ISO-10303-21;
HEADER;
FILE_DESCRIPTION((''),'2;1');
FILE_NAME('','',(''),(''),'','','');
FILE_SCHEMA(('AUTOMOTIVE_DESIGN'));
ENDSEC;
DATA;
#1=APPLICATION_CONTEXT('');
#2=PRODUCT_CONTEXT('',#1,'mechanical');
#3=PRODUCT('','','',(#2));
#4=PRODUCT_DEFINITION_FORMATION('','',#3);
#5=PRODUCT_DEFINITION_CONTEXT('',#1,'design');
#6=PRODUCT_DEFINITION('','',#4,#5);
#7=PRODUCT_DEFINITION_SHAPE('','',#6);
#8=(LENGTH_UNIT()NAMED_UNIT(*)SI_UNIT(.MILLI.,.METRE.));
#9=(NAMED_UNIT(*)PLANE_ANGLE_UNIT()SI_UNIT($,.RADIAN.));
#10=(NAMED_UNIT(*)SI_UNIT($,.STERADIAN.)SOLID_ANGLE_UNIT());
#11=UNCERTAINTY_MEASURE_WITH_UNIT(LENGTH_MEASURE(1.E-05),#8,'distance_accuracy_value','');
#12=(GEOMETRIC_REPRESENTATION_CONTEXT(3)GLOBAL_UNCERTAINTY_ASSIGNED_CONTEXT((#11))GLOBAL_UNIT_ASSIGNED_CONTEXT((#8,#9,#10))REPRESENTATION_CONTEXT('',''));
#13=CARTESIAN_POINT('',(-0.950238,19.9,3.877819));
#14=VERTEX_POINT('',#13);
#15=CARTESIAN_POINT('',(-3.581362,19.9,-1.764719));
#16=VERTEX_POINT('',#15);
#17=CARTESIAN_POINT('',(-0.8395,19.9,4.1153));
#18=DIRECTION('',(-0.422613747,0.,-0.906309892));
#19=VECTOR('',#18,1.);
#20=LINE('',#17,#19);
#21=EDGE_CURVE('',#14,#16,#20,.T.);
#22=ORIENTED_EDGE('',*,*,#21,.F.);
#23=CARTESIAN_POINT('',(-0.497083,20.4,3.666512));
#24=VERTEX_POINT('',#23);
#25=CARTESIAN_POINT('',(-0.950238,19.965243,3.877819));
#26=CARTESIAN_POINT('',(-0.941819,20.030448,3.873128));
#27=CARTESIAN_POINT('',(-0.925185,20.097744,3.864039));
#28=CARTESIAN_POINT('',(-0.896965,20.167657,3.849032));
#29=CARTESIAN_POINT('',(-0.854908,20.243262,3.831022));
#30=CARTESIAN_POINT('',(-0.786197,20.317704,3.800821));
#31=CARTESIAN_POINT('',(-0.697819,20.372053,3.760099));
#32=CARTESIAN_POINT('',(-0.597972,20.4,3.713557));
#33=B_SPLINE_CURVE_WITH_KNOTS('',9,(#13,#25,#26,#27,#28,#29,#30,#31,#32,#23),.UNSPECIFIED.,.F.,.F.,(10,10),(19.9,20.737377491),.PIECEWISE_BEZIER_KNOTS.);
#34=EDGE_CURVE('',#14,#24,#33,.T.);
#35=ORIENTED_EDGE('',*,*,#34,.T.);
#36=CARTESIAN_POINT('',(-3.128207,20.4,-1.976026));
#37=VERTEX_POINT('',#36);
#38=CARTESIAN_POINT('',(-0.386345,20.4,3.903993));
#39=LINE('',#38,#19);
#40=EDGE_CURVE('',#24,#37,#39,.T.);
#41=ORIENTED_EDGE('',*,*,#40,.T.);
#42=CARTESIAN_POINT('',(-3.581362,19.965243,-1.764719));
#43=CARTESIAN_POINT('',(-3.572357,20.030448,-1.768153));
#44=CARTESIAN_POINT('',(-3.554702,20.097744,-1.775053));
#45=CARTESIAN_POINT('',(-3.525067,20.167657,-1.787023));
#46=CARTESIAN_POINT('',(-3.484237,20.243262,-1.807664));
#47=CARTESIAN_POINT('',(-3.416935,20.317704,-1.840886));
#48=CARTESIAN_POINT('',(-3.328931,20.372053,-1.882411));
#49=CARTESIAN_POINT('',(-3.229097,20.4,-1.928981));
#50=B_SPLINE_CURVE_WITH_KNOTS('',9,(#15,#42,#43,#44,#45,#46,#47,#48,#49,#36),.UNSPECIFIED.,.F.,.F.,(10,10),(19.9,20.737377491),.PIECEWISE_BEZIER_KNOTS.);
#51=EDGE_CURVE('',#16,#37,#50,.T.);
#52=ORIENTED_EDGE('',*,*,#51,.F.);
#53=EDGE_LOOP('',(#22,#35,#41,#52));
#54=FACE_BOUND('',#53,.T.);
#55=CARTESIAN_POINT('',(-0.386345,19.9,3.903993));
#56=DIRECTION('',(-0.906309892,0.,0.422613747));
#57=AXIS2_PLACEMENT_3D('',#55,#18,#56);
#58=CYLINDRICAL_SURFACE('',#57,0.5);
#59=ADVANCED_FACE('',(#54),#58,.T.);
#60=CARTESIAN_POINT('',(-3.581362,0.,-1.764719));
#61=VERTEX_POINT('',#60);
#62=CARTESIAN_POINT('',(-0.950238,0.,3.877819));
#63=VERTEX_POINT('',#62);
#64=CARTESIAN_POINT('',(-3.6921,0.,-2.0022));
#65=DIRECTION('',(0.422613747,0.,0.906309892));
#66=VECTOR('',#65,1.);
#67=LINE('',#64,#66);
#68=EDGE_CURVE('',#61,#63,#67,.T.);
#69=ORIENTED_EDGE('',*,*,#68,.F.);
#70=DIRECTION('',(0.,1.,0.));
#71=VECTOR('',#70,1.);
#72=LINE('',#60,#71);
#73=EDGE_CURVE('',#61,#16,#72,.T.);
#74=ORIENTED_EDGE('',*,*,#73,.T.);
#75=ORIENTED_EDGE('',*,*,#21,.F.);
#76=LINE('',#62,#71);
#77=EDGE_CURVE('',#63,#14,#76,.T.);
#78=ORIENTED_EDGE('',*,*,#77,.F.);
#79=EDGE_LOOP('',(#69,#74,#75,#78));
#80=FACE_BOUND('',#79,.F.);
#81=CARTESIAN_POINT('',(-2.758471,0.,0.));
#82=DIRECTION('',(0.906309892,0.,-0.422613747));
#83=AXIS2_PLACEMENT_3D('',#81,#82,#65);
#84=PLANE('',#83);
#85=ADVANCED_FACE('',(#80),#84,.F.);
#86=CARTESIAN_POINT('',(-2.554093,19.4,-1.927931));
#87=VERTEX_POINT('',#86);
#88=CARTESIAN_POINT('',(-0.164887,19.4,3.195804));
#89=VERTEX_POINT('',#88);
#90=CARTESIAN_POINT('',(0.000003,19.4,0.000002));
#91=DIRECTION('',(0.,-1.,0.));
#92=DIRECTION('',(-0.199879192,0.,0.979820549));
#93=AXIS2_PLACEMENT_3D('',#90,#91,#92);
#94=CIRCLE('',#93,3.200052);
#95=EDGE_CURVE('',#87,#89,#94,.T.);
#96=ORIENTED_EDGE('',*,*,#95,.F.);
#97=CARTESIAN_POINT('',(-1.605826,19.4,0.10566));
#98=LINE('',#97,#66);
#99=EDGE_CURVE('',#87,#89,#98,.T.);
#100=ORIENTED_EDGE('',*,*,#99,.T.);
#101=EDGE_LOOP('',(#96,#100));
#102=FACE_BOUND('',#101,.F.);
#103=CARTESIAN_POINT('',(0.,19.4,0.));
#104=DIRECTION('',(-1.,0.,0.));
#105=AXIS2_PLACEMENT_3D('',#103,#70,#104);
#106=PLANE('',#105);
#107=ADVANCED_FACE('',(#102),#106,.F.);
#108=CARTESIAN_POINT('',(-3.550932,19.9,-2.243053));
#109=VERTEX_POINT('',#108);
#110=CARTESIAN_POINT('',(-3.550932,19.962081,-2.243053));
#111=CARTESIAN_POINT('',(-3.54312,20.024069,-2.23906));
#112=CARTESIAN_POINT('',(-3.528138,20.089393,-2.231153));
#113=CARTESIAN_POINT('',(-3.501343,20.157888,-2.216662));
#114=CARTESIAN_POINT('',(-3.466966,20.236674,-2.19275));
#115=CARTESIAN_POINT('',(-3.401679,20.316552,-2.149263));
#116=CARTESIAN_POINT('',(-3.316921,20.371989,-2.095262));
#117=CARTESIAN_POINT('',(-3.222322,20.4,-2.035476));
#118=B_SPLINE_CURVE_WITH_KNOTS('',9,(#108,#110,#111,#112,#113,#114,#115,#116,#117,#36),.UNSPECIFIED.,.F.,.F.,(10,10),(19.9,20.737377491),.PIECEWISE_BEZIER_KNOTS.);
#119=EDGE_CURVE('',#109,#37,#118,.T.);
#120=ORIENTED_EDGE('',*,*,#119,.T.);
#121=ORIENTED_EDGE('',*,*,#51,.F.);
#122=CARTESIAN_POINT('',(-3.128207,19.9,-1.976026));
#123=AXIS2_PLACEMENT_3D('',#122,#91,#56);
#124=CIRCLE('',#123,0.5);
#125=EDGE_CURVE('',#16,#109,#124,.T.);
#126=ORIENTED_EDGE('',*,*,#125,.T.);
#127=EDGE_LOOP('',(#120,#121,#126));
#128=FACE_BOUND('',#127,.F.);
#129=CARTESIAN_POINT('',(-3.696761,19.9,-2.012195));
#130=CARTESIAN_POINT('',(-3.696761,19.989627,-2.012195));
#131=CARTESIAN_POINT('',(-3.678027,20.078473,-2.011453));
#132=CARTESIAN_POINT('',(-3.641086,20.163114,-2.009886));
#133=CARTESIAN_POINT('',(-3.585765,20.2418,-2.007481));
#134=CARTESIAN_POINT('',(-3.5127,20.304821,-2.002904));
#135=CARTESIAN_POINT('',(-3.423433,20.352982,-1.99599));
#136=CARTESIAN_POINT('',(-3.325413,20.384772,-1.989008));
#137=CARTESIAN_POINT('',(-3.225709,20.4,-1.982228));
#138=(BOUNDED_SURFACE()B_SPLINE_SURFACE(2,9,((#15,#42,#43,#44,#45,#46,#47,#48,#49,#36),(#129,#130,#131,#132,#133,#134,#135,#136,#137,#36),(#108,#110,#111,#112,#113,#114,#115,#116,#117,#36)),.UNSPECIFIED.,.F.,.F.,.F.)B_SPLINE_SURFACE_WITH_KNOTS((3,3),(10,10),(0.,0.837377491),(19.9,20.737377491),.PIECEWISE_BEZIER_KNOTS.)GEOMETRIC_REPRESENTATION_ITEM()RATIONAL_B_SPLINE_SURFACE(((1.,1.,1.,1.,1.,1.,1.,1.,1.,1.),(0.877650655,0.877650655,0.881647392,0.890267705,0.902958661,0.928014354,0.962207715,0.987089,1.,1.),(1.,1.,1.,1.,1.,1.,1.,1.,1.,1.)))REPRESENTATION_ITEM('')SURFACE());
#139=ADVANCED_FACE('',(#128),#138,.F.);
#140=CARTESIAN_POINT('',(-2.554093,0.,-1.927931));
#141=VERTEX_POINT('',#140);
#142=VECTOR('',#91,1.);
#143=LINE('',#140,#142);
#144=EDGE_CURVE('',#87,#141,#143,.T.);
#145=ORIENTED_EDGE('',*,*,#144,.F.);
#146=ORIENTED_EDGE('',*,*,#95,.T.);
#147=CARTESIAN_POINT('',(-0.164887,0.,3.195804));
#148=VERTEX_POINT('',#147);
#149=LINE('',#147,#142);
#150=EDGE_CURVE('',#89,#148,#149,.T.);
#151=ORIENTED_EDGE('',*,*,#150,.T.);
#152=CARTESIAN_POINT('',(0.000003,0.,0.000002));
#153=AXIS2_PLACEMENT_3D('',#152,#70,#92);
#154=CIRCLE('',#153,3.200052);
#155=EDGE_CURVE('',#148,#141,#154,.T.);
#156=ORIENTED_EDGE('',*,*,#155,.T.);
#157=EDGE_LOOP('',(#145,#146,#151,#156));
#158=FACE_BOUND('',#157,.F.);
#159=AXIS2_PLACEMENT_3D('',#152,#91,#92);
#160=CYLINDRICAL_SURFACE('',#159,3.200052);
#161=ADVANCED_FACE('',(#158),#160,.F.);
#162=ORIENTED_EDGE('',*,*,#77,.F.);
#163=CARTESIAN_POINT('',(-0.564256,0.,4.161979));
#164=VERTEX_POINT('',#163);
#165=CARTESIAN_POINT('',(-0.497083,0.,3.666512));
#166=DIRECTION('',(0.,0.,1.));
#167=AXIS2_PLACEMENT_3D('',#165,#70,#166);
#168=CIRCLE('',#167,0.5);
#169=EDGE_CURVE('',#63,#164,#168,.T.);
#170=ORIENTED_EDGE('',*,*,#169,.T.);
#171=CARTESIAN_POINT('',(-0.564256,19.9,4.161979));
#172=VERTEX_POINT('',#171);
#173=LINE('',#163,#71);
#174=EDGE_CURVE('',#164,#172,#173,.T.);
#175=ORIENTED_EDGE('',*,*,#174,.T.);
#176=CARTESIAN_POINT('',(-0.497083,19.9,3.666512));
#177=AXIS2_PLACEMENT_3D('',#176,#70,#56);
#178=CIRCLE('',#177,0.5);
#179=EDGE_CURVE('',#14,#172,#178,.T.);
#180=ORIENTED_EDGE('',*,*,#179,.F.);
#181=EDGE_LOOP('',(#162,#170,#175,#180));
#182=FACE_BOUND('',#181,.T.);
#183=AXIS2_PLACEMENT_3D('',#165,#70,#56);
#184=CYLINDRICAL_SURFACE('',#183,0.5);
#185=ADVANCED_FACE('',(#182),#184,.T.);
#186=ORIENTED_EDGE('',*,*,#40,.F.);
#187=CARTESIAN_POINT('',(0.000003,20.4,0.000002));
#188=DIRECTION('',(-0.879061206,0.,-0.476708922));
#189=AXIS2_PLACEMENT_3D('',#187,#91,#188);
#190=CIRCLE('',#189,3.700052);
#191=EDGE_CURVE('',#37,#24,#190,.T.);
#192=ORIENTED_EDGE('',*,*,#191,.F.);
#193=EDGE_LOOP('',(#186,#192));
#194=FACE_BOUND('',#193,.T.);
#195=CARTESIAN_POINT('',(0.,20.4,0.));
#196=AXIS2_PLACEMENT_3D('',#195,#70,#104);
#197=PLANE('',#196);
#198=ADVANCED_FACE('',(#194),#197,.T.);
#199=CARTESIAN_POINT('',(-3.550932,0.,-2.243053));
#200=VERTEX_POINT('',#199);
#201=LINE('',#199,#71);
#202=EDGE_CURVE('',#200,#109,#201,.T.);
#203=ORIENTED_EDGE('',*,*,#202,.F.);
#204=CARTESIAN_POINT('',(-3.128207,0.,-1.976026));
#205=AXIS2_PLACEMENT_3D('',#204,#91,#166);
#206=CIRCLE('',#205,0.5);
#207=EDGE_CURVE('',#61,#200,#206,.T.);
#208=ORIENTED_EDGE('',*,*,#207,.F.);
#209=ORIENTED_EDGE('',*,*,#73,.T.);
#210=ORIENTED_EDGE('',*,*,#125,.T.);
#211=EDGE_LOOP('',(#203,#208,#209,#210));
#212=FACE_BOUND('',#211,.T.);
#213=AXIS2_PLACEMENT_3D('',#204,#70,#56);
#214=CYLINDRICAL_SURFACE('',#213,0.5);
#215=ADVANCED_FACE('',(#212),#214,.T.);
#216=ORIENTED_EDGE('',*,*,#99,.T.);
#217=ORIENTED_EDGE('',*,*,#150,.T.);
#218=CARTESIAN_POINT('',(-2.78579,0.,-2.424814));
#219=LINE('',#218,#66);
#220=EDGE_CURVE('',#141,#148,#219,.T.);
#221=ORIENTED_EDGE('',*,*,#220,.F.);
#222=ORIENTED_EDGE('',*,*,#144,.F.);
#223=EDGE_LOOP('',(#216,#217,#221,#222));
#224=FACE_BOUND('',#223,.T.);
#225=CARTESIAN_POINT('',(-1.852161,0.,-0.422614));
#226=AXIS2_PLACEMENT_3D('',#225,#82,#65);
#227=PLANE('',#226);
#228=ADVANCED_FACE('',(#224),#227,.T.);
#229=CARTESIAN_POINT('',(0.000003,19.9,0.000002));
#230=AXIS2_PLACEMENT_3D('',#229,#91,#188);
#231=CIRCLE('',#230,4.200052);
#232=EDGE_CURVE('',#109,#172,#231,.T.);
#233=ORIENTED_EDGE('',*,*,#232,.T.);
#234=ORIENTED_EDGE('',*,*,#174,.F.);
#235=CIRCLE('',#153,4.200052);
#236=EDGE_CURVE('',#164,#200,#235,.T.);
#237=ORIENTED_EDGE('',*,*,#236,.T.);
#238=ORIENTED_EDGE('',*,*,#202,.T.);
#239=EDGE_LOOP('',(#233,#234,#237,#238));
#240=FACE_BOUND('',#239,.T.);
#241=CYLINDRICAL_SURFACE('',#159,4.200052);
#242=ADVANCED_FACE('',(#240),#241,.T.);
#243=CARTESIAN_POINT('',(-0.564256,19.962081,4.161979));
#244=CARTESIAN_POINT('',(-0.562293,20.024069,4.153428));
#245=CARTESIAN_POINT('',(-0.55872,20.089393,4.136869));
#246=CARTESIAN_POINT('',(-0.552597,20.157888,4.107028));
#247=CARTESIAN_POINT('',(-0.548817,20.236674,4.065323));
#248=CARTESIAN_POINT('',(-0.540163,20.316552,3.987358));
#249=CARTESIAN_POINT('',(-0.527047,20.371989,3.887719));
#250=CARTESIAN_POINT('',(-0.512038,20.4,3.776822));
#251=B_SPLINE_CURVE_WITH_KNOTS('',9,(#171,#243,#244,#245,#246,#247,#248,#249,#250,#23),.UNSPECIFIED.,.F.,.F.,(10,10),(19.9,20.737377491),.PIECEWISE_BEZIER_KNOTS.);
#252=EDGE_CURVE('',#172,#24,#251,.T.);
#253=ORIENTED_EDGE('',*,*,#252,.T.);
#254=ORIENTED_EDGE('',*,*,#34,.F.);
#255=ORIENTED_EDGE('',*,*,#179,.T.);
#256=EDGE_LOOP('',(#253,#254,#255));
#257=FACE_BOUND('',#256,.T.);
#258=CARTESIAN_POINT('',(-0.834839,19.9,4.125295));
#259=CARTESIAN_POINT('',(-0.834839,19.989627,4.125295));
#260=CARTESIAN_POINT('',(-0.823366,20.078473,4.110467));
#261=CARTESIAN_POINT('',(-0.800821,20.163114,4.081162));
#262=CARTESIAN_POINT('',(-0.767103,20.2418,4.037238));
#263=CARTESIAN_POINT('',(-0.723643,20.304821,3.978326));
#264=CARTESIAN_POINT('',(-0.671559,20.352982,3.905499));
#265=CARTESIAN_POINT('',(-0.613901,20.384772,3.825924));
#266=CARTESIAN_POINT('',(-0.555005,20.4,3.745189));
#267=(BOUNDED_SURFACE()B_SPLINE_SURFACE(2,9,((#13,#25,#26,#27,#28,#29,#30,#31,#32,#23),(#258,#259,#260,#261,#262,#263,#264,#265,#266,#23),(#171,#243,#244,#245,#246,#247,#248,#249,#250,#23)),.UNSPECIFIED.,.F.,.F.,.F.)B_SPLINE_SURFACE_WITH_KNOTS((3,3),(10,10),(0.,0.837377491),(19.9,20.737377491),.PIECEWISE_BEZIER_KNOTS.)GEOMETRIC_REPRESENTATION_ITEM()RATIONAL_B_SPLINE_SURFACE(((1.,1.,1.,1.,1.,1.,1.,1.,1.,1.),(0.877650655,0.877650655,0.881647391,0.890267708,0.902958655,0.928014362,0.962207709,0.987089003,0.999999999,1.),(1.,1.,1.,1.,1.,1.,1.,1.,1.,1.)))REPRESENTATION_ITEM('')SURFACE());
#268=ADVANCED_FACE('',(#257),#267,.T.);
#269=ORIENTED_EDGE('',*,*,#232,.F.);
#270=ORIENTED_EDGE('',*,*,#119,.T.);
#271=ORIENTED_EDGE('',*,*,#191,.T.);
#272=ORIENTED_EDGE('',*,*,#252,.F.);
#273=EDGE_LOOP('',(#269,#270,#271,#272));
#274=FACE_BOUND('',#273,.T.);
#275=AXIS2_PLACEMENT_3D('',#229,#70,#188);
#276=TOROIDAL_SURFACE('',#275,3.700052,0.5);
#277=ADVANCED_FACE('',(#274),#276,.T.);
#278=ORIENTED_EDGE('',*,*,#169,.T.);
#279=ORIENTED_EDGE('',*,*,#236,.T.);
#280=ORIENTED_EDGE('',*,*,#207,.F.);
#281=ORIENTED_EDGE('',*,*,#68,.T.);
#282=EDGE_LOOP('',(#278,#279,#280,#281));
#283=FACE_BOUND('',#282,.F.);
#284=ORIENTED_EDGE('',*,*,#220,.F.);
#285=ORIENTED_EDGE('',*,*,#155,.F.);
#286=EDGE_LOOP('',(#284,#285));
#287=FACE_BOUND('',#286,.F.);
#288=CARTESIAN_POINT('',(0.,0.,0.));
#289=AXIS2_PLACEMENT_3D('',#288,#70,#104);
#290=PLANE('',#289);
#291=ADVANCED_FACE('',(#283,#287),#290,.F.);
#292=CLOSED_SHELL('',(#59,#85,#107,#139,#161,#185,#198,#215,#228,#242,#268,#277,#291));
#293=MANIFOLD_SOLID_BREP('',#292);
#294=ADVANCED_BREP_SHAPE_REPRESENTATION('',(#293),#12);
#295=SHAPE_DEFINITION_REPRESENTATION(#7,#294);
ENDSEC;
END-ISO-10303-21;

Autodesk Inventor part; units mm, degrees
ref_plane "YZ Plane" through (0, 0, 0) normal (1, 0, 0) x (0, 1, 0)
ref_plane "XZ Plane" through (0, 0, 0) normal (0, 1, 0) x (-1, 0, 0)
ref_plane "XY Plane" through (0, 0, 0) normal (0, 0, 1) x (1, 0, 0)
sketch "Sketch1" plane through (0, 0, 0) normal (0, 1, 0) x (-1, 0, 0)
  arc A0 (0.8395, 4.1153) -> (3.6921, -2.0022) centre (0, 0) ccw
  line L0 (0, -7.6704) -> (0, 6.9519) projected
  line L1 (-7.5059, 0) -> (5.9652, 0) projected
  line L2 (3.6921, -2.0022) -> (0.8395, 4.1153)
  dimension "d2" = 8.4
  dimension "d3" = 2.5
  dimension "d4" = 25
extrude "Extrusion1" add sketch "Sketch1" along normal blind 20.4
shell "Shell1" thickness 1 removed faces 1 at (-0.173, 0, 1.1178)
fillet "Fillet1" radius 0.5 2 edges at (-2.2658, 20.4, 1.0565) (3.8065, 20.4, -1.775)
fillet "Fillet2" radius 0.5 4 edges at (-3.5246, 20.2564, -1.9963) (-0.7363, 20.2564, 3.9832) (-0.8395, 9.95, 4.1153) (-3.6921, 9.95, -2.0022)
properties part number "Poti_Verlaengerung"
